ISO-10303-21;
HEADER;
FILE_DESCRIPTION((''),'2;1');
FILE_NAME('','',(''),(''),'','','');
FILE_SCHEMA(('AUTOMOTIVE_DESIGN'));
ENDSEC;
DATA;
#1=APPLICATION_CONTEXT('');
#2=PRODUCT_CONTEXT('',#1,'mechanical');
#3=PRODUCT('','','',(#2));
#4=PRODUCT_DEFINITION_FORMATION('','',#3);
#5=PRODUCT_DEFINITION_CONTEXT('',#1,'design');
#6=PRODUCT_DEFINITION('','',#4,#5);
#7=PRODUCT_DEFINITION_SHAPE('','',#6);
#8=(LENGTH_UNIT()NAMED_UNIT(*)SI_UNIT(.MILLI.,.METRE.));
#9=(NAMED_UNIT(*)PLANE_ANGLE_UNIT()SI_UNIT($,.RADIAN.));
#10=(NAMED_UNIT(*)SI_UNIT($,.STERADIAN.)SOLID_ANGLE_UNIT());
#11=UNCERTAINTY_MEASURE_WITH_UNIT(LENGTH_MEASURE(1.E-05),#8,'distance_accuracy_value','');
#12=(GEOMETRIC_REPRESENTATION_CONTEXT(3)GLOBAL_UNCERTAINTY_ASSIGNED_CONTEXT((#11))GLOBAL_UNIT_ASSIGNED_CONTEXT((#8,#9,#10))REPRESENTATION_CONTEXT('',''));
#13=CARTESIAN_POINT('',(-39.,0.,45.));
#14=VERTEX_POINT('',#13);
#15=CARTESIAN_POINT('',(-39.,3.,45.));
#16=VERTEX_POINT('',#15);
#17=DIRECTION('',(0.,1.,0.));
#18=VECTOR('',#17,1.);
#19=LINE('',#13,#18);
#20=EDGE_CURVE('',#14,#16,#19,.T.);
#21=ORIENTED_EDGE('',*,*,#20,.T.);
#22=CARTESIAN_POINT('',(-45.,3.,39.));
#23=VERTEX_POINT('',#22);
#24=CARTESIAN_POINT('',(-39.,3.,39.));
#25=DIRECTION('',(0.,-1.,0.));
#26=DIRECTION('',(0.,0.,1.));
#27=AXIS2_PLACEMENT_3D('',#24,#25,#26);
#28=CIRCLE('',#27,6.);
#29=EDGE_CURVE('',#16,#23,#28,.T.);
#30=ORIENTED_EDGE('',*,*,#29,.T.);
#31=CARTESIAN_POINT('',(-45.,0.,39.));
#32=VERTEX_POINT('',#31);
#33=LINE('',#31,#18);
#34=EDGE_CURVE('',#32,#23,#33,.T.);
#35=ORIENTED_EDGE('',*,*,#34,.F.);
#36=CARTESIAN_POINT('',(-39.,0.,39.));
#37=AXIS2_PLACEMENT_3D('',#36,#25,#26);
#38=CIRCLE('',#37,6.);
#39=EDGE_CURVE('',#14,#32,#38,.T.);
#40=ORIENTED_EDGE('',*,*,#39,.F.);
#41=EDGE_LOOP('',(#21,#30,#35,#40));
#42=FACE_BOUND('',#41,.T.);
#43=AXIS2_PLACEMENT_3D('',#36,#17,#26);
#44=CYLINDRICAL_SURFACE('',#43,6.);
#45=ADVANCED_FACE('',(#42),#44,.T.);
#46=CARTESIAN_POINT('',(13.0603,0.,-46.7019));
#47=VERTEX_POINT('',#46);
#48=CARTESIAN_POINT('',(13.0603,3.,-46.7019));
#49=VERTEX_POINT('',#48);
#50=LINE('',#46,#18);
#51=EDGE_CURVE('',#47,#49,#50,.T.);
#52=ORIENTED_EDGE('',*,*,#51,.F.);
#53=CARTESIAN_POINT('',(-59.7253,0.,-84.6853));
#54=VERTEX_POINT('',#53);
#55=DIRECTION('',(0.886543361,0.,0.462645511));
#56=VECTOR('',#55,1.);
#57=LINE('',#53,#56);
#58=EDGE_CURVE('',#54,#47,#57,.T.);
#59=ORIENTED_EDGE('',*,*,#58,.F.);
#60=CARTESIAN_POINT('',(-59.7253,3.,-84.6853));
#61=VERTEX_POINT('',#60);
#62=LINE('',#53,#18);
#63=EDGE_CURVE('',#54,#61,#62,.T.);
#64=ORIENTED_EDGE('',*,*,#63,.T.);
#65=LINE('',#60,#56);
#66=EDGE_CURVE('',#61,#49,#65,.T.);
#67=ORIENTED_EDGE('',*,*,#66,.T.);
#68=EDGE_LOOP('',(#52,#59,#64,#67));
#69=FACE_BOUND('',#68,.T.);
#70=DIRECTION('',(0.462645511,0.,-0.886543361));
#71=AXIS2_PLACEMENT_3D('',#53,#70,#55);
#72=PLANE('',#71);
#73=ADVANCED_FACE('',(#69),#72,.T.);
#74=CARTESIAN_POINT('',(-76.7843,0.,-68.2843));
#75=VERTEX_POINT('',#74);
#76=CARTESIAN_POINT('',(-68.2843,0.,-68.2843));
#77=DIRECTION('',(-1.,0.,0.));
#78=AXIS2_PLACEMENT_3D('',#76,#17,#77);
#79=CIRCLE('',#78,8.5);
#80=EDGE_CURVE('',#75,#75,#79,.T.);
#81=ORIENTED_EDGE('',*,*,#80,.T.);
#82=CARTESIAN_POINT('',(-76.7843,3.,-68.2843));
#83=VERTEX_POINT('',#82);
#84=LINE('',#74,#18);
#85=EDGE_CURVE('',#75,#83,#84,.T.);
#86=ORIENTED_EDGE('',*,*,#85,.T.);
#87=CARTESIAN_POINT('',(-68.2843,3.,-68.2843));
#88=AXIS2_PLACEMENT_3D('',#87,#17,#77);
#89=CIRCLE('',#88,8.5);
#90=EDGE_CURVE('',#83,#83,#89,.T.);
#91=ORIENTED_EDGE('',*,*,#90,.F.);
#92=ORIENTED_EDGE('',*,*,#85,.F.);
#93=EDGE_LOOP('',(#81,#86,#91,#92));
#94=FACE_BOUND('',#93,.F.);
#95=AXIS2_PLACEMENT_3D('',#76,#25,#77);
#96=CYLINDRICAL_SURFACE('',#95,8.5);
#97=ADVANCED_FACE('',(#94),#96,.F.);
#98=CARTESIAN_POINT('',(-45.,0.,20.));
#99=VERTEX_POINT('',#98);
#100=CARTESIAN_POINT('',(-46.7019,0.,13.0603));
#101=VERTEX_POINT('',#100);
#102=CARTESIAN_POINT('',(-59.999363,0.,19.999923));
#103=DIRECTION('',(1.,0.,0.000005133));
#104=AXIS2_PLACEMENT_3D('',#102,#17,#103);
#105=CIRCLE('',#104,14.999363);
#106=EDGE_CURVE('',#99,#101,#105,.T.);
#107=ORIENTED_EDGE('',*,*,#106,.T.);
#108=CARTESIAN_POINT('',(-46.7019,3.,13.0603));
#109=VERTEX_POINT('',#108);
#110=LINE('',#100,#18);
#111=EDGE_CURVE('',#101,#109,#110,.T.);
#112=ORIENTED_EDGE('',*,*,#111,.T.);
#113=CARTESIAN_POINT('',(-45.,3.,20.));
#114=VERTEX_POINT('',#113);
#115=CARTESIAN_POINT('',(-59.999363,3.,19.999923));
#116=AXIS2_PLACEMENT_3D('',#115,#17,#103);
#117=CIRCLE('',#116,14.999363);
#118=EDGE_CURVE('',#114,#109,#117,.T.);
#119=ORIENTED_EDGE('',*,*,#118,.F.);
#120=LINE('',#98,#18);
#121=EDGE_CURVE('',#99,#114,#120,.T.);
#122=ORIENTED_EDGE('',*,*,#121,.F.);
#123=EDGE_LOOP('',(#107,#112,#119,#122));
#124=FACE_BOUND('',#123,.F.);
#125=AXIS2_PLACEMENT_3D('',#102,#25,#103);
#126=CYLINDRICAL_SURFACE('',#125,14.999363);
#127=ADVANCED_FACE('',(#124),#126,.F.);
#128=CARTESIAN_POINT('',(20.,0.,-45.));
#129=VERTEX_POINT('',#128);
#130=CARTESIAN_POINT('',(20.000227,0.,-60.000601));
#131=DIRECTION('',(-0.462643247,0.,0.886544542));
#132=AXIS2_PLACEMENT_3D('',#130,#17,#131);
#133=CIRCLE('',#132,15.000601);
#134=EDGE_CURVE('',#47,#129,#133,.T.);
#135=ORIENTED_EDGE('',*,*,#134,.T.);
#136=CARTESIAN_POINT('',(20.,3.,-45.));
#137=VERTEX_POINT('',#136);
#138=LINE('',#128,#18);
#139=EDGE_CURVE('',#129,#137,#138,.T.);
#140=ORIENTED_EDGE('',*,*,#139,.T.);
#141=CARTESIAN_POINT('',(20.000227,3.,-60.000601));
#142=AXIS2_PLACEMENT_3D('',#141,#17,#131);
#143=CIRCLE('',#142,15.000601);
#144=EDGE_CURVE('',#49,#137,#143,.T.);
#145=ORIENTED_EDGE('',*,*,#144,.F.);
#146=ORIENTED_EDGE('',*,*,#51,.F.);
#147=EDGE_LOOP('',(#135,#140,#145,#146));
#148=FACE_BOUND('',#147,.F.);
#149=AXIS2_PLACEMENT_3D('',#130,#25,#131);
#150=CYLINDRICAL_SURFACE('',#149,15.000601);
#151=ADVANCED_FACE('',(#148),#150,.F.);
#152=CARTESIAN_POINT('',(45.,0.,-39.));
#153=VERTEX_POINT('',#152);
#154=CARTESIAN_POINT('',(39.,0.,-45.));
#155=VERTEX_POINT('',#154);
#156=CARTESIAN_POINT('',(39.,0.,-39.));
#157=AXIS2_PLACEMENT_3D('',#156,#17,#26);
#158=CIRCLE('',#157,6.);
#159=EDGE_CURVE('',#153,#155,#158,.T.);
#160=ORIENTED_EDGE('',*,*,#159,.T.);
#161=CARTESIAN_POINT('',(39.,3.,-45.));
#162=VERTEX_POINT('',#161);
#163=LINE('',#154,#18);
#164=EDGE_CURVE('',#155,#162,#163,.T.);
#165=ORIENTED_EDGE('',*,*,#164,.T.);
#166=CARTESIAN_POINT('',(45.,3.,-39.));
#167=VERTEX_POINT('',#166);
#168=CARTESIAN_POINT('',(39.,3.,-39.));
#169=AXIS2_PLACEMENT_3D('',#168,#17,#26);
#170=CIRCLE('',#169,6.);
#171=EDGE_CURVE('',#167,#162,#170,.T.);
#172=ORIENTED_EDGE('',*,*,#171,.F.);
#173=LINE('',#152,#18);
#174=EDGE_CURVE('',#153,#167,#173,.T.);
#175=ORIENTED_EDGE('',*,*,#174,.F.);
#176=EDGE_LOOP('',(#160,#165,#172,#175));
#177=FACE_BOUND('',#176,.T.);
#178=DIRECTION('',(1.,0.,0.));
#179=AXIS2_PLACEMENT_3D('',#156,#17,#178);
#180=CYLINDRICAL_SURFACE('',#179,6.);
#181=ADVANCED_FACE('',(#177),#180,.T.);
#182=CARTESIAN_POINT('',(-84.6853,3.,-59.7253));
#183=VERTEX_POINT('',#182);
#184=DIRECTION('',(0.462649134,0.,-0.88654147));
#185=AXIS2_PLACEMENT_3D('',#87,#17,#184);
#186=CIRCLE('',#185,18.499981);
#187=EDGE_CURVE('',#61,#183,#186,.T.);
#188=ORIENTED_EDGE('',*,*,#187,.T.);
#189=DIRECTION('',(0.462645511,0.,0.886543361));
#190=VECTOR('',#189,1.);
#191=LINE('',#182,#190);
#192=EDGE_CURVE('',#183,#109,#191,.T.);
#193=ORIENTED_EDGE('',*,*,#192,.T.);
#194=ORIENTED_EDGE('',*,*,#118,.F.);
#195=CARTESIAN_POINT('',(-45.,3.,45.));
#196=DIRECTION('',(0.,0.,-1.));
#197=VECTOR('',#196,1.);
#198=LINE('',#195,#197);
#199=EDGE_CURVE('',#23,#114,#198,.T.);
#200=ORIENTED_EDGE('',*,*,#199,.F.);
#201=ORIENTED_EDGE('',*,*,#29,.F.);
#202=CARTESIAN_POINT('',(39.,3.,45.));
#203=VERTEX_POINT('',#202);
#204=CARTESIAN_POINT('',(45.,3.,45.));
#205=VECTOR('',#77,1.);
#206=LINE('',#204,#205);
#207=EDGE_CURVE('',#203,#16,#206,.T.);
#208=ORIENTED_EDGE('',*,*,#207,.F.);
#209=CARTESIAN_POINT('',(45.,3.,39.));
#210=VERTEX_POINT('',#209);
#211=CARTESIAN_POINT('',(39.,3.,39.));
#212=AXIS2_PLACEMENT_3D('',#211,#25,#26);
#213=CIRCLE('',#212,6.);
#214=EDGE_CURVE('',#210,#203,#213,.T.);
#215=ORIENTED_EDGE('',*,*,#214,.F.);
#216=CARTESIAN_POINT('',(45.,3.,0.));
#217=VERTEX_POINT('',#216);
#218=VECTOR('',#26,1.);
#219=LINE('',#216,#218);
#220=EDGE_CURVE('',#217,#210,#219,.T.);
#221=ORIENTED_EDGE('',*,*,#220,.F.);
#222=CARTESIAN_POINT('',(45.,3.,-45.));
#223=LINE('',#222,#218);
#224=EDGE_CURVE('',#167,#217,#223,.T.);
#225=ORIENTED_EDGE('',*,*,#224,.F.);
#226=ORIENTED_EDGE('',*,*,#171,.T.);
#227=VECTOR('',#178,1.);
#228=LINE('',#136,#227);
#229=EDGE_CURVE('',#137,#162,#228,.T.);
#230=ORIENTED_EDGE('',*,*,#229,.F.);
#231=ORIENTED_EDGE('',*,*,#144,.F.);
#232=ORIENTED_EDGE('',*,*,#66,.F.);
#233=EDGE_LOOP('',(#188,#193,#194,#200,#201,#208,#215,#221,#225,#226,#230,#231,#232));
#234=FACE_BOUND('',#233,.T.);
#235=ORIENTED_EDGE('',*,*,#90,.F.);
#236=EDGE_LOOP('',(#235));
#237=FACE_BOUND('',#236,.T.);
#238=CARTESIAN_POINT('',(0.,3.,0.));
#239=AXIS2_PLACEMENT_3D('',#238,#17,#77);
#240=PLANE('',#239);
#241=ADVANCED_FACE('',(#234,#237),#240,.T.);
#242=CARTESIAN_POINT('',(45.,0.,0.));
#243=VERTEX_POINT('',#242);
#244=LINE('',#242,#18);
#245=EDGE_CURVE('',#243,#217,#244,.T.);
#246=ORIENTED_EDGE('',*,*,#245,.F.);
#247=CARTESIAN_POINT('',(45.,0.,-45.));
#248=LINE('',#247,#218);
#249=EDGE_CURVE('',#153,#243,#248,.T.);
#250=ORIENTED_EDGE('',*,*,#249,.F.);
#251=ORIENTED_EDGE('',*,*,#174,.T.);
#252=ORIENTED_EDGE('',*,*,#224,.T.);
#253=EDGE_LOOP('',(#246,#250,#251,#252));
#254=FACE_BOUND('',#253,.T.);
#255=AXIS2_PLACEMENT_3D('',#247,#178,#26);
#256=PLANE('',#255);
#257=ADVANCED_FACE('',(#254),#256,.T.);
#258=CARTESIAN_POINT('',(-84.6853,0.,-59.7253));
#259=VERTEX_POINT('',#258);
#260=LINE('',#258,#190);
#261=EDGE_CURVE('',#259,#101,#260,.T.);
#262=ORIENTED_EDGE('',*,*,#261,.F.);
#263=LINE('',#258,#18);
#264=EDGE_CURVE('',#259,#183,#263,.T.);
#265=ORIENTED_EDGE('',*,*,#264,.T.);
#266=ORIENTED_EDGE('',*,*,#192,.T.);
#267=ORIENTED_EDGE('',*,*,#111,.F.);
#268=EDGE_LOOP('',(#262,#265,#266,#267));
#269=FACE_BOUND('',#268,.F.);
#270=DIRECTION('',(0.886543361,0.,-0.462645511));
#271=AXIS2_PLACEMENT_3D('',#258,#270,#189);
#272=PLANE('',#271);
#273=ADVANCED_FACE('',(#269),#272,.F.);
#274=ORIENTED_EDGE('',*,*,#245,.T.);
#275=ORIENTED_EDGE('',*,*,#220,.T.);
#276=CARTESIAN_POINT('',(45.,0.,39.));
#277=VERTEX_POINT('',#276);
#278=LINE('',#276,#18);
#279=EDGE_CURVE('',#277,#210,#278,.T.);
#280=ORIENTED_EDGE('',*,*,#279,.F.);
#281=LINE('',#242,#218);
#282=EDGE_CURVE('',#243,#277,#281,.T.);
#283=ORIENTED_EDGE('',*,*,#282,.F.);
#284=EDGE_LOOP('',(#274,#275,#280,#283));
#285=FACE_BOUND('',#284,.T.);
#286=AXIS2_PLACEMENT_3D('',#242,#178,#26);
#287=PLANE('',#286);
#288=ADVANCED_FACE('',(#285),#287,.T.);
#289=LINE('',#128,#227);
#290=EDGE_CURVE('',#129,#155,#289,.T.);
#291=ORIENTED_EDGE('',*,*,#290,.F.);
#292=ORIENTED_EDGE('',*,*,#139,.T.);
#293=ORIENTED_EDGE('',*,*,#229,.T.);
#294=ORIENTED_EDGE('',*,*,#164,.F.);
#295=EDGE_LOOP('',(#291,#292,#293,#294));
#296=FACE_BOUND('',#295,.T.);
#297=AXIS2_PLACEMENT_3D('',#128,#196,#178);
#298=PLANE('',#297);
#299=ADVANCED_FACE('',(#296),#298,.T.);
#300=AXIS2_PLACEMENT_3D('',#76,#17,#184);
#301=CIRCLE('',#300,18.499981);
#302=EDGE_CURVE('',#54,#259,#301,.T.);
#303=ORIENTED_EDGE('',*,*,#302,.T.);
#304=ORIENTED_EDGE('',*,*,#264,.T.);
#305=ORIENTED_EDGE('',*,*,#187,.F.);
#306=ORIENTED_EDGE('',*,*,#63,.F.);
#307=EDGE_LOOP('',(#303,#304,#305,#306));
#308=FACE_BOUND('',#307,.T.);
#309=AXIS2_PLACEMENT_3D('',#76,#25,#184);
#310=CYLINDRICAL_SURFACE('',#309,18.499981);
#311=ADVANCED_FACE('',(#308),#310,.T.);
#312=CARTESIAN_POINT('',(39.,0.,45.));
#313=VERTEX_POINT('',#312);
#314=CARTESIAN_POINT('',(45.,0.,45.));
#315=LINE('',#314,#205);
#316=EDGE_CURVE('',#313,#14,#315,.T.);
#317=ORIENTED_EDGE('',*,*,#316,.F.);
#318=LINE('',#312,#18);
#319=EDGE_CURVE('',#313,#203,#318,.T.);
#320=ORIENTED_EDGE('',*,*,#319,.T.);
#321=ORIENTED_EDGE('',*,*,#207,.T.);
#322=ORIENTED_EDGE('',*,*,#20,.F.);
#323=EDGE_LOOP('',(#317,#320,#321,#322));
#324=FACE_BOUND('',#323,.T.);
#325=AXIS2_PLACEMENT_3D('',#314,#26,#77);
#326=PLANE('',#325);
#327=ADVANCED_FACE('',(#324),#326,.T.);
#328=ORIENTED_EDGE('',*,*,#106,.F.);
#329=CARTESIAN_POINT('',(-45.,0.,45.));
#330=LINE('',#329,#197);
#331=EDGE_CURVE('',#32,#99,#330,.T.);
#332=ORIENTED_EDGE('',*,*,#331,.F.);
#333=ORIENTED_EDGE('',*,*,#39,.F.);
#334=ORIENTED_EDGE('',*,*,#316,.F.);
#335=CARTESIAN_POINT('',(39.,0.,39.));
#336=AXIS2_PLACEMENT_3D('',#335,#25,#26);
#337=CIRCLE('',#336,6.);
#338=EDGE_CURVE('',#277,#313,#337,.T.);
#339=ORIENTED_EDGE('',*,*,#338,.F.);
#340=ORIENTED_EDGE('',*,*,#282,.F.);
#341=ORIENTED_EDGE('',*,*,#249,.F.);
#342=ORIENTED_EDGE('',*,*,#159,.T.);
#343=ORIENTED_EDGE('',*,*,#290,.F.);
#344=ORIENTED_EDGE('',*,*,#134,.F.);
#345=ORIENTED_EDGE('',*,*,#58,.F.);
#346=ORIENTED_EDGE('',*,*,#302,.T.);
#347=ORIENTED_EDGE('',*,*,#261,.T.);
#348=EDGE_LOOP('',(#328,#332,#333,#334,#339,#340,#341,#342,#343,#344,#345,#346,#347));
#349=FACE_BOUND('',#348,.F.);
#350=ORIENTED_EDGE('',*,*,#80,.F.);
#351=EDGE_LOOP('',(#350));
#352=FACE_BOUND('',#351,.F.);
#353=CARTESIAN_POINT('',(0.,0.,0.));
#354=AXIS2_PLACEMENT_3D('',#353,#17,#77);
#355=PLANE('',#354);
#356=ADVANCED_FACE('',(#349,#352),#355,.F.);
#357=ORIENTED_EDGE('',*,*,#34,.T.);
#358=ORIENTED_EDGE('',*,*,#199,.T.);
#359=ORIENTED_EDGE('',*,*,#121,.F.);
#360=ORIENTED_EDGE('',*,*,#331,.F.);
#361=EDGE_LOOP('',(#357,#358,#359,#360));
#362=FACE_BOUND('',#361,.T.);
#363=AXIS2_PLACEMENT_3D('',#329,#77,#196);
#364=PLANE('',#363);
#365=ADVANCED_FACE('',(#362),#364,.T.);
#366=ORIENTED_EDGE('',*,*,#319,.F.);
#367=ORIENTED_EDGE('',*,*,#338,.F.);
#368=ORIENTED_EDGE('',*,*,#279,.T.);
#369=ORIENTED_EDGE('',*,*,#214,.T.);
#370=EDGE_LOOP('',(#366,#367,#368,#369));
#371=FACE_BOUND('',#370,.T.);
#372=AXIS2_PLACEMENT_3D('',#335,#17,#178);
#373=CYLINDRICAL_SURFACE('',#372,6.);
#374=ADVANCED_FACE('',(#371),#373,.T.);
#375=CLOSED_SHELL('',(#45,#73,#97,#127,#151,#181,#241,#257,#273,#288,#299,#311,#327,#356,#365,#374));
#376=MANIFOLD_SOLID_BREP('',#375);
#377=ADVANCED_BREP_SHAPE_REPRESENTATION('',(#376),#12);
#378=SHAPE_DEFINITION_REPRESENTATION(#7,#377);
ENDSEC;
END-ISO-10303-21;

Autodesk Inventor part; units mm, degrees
ref_plane "YZ Plane" through (0, 0, 0) normal (1, 0, 0) x (0, 1, 0)
ref_plane "XZ Plane" through (0, 0, 0) normal (0, 1, 0) x (-1, 0, 0)
ref_plane "XY Plane" through (0, 0, 0) normal (0, 0, 1) x (1, 0, 0)
sketch "Sketch1" plane through (0, 0, 0) normal (0, 1, 0) x (-1, 0, 0)
  line L0 (40, 40) -> (-40, 40) construction
  line L1 (-40, 40) -> (-40, -40) construction
  line L2 (-40, -40) -> (40, -40) construction
  line L3 (40, -40) -> (40, 40) construction
  line L4 (-40, 40) -> (40, -40) construction
  line L5 (0, 40) -> (0, -40) construction
  line L6 (-45, -45) -> (-45, 0)
  line L7 (-20, -45) -> (-45, -45)
  arc A0 (59.7253, -84.6853) -> (84.6853, -59.7253) centre (68.2843, -68.2843) ccw
  circle A1 centre (68.2843, -68.2843) radius 8.5
  line L8 (59.7253, -84.6853) -> (-13.0603, -46.7019)
  arc A2 (-13.0603, -46.7019) -> (-20, -45) centre (-20, -60) ccw
  arc A3 (84.6853, -59.7253) -> (59.7253, -84.6853) centre (68.2843, -68.2843) ccw construction
  line L9 (84.6853, -59.7253) -> (46.7019, 13.0603)
  line L10 (-45, 0) -> (-45, 45)
  line L11 (-45, 45) -> (45, 45)
  line L12 (45, 45) -> (45, 20)
  arc A4 (45, 20) -> (46.7019, 13.0603) centre (60, 20) ccw
  line L13 (40, 0) -> (45, 0) construction
  line L14 (0, 40) -> (0, 45) construction
  line L15 (-40, 0) -> (-45, 0) construction
  point P0 (0, 0)
  point P1 (0, 0)
  point P2 (0, 0)
  dimension "d2" = 80
  dimension "d3" = 80
  dimension "d29" = 5
  dimension "d30" = 17
  dimension "d31" = 10
  dimension "d32" = 40
  dimension "d34" = 5
  dimension "d35" = 15
  dimension "d36" = 25
extrude "Plate1" add sketch "Sketch1" along normal blind 3
fillet "Corner Round3" radius 6 3 edges at (-45, 1.5, 45) (45, 1.5, 45) (45, 1.5, -45)
equation "\"d34\" = d29"
equation "\"d6\" = Thickness"
equation "\"Thickness\" = 3"
properties part number "MSC 901 BASE PLATE" material "Stainless Steel"
